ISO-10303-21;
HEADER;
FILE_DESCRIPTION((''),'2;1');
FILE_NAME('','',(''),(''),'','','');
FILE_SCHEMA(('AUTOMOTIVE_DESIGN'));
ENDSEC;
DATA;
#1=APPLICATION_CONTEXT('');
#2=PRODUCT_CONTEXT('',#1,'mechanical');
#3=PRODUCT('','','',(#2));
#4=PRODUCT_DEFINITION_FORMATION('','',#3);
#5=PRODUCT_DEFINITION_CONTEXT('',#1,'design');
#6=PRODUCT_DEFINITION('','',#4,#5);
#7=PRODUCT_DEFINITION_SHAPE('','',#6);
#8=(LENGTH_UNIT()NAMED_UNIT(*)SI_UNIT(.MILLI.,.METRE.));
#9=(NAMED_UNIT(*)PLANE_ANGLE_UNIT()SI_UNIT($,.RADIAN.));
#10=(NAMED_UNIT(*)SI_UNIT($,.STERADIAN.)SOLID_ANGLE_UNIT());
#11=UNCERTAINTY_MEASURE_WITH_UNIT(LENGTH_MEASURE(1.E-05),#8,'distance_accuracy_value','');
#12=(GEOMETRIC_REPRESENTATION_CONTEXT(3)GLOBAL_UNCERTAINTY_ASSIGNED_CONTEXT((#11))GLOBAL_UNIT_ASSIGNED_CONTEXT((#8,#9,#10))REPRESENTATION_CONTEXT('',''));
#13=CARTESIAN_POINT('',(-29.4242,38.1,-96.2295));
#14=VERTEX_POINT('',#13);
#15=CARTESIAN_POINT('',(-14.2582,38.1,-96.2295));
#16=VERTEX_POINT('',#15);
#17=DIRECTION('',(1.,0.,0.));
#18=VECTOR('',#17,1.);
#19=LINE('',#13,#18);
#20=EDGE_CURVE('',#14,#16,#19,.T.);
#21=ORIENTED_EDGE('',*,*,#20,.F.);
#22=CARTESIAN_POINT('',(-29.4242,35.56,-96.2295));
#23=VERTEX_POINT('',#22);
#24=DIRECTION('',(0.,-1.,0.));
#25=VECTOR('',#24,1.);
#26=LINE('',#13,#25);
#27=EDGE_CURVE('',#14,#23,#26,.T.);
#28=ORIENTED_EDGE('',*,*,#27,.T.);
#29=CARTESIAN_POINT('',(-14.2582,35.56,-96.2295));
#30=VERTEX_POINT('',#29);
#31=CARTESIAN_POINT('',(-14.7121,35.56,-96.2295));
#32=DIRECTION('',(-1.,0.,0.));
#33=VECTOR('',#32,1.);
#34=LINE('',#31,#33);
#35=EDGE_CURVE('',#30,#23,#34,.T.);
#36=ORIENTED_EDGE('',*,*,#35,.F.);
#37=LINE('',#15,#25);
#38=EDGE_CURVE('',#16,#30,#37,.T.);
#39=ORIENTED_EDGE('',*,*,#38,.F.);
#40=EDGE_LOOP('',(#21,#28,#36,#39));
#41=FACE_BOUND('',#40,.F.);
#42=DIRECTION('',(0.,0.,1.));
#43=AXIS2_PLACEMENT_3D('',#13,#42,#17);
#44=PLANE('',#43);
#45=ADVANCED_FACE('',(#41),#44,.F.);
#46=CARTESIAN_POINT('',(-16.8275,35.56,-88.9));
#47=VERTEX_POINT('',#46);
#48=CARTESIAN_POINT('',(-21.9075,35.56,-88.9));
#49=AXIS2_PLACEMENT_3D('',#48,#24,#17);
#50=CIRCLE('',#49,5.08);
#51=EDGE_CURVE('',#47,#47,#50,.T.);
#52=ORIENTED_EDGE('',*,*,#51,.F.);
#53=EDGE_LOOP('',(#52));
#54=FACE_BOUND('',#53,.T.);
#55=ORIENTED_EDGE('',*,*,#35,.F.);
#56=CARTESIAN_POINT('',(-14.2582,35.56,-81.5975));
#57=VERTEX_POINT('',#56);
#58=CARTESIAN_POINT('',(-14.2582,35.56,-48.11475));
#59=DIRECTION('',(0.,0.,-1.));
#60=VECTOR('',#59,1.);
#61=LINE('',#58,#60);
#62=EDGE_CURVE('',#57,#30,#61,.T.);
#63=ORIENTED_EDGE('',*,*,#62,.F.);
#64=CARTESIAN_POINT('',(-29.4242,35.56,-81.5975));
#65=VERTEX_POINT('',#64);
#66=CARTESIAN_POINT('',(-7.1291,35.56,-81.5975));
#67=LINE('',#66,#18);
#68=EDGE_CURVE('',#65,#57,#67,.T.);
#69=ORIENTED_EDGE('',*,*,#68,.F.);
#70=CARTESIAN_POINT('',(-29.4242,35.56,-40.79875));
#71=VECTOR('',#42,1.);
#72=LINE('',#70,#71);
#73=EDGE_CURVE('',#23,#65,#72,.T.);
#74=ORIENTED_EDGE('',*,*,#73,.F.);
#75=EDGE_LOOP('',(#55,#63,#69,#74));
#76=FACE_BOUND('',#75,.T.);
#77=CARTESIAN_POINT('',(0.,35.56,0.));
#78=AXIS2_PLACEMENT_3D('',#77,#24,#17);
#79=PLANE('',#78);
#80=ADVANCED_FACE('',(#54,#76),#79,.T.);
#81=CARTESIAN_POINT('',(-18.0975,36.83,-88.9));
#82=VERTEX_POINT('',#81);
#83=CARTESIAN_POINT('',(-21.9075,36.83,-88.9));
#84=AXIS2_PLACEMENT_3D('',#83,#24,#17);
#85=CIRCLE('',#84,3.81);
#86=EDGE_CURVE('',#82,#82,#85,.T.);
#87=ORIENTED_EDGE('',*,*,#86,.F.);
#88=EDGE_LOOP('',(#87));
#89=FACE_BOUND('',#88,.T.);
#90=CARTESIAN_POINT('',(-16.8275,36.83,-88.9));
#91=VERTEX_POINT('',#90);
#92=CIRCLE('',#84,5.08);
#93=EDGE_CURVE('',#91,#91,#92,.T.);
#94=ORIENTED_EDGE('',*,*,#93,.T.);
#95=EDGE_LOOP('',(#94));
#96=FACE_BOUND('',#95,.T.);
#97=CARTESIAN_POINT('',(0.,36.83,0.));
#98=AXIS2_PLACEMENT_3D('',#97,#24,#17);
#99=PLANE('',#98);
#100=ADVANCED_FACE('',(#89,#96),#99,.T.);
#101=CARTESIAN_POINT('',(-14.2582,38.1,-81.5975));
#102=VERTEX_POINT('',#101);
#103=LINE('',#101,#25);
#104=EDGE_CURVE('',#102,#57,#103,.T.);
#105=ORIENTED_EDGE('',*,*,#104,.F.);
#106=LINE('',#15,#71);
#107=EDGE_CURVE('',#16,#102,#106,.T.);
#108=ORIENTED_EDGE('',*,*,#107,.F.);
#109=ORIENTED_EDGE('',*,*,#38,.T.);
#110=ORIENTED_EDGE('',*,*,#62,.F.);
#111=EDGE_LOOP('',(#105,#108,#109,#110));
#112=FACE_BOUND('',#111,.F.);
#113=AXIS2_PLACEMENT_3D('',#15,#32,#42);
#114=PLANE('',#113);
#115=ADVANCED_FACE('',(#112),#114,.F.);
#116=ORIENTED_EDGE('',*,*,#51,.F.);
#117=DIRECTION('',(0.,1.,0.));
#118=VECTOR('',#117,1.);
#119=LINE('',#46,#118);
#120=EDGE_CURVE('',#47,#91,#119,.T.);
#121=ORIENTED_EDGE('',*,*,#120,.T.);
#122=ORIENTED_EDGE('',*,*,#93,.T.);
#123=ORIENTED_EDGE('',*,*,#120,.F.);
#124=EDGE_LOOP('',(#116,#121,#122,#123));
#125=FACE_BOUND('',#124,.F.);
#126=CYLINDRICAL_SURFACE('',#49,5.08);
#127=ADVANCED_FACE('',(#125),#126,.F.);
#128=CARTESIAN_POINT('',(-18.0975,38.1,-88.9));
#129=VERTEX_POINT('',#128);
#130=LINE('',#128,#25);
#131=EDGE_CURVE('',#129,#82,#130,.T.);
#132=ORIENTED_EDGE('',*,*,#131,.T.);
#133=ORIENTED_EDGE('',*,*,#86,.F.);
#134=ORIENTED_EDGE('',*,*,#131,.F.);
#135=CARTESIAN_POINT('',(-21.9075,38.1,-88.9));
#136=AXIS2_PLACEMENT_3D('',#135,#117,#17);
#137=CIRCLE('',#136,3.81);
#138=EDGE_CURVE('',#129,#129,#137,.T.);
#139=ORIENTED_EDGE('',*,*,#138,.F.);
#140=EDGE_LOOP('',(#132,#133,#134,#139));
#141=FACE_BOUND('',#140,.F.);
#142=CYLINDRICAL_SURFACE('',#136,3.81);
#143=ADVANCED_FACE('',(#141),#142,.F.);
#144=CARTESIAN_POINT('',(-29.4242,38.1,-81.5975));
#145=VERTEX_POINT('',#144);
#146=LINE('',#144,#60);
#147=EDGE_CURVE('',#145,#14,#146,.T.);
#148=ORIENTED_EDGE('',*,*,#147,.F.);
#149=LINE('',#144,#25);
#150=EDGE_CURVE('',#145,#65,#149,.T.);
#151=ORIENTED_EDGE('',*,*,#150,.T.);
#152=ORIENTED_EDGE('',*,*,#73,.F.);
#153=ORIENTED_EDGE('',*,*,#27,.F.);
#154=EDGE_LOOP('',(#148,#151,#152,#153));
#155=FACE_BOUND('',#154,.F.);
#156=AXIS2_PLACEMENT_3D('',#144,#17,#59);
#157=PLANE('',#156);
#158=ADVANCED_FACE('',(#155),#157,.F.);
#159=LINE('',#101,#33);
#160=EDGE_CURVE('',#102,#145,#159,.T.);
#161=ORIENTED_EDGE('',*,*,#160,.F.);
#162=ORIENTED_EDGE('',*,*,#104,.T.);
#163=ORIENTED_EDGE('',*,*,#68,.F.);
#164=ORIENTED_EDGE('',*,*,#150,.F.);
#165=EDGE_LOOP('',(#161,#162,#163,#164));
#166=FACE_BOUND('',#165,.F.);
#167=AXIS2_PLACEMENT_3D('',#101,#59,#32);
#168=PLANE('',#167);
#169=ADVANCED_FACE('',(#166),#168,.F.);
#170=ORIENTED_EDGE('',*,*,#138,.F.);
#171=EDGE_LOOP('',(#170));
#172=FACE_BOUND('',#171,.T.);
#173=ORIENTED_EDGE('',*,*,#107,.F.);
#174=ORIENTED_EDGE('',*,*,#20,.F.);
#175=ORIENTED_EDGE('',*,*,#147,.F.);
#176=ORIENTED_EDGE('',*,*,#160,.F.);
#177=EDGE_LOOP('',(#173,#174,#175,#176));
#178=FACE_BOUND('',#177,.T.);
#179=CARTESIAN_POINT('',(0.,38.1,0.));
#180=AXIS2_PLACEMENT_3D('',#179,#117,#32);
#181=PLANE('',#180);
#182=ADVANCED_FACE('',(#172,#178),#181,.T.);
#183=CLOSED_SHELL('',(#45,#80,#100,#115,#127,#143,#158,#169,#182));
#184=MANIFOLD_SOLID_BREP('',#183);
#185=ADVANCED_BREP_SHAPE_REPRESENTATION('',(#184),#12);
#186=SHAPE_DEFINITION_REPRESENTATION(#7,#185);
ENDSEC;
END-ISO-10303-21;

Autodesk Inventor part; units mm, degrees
ref_plane "YZ Plane" through (0, 0, 0) normal (1, 0, 0) x (0, 1, 0)
ref_plane "XZ Plane" through (0, 0, 0) normal (0, 1, 0) x (-1, 0, 0)
ref_plane "XY Plane" through (0, 0, 0) normal (0, 0, 1) x (1, 0, 0)
sketch "Sketch1" plane through (0, 0, 0) normal (0, 1, 0) x (-1, 0, 0)
  line L0 (0, 0) -> (177.8, 0)
  line L1 (177.8, 0) -> (177.8, -114.3)
  line L2 (177.8, -114.3) -> (0, -114.3)
  line L3 (0, -114.3) -> (0, 0)
  dimension "d0" = 177.8
  dimension "d1" = 114.3
extrude "Extrusion1" add sketch "Sketch1" along normal blind 38.1
sketch "Sketch2" plane through (0, 0, 0) normal (0, -1, 0) x (1, 0, 0)
  line L0 (-177.8, -114.3) -> (-177.8, 0) projected
  line L1 (0, 0) -> (-177.8, 0)
  line L2 (-177.8, 0) -> (-177.8, -114.3)
  line L3 (-177.8, -114.3) -> (0, -114.3)
  line L4 (0, -114.3) -> (0, 0)
  line L5 (-5.08, -5.08) -> (-172.72, -5.08)
  line L6 (-172.72, -5.08) -> (-172.72, -109.22)
  line L7 (-172.72, -109.22) -> (-5.08, -109.22)
  line L8 (-5.08, -109.22) -> (-5.08, -5.08)
  dimension "d4" = 5.08
extrude "Extrusion2" cut sketch "Sketch2" against normal blind 35.56 contours L8 L7 L6 L5
fillet "Fillet1" radius 3.175 4 edges at (-177.8, 38.1, -57.15) (-88.9, 38.1, 0) (-88.9, 38.1, -114.3) (0, 38.1, -57.15)
sketch "Sketch3" plane through (0, 38.1, 0) normal (0, 1, 0) x (1, 0, 0)
  line L0 (-177.8, 114.3) -> (-171.45, 114.3)
  line L1 (-171.45, 114.3) -> (-171.45, 0)
  line L2 (-171.45, 0) -> (-177.8, 0)
  line L3 (-177.8, 0) -> (-177.8, 114.3)
  line L4 (0, 114.3) -> (-177.8, 114.3) projected
  line L5 (-177.8, 114.3) -> (0, 114.3)
  line L6 (0, 114.3) -> (0, 107.95)
  line L7 (0, 107.95) -> (-177.8, 107.95)
  line L8 (-177.8, 107.95) -> (-177.8, 114.3)
  line L9 (-158.75, 100.4887) -> (-100.6475, 100.4887)
  line L10 (-100.6475, 100.4887) -> (-100.6475, 13.8112)
  line L11 (-100.6475, 13.8112) -> (-158.75, 13.8112)
  line L12 (-158.75, 13.8112) -> (-158.75, 100.4887)
  point P0 (0, 0)
  dimension "d8" = 6.35
  dimension "d9" = 6.35
  dimension "d10" = 58.1025
  dimension "d11" = 86.6775
  dimension "d12" = 13.8112
  dimension "d13" = 19.05
extrude "Extrusion3" cut sketch "Sketch3" against normal blind 35.56 contours L9 L10 L11 L12
sketch "Sketch4" plane through (0, 38.1, 0) normal (0, 1, 0) x (1, 0, 0)
  line L0 (-94.2975, 17.78) -> (-81.2088, 17.78)
  line L1 (-91.7575, 20.32) -> (-91.7575, 26.67)
  line L2 (-91.7575, 26.67) -> (-94.2975, 26.67)
  line L3 (-94.2975, 26.67) -> (-94.2975, 17.78)
  line L4 (-94.2975, 17.78) -> (-78.6765, 17.78)
  line L5 (-78.6765, 17.78) -> (-78.6765, 20.32)
  line L6 (-94.2975, 24.2647) -> (-94.2975, 17.78)
  line L7 (-85.6615, 20.32) -> (-85.6615, 24.13)
  line L8 (-85.6615, 24.13) -> (-88.2015, 24.13)
  line L9 (-88.2015, 24.13) -> (-88.2015, 20.32)
  line L10 (-78.6765, 20.32) -> (-85.6615, 20.32)
  line L11 (-88.2015, 20.32) -> (-91.7575, 20.32)
  line L12 (-100.6475, 100.4887) -> (-100.6475, 13.8112) projected
  line L13 (-177.8, 0) -> (0, 0) projected
  line L14 (-94.2975, 27.94) -> (-78.6765, 27.94)
  line L15 (-78.6765, 27.94) -> (-78.6765, 30.7699)
  line L16 (-81.2165, 30.48) -> (-94.2975, 30.48)
  line L17 (-94.2975, 30.48) -> (-94.2975, 27.94)
  line L18 (-83.0828, 27.94) -> (-78.6765, 27.94)
  line L19 (-78.6765, 27.94) -> (-78.6765, 36.83)
  line L20 (-78.6765, 36.83) -> (-81.2165, 36.83)
  line L21 (-81.2165, 36.83) -> (-81.2165, 30.48)
  ellipse E0 centre (-86.487, 41.91) end of major axis (-94.2975, 41.91) minor radius 5.334
  ellipse E1 centre (-86.487, 53.34) end of major axis (-94.2975, 53.34) minor radius 5.334
  line L22 (-94.2975, 60.96) -> (-78.6765, 60.96)
  line L23 (-78.6765, 60.96) -> (-78.6765, 63.754)
  line L24 (-94.2975, 63.754) -> (-94.2975, 60.96)
  ellipse E2 centre (-86.487, 63.754) end of major axis (-94.2975, 63.754) minor radius 7.62 (-78.6765, 63.754) -> (-94.2975, 63.754) ccw
  line L25 (-91.7575, 63.754) -> (-91.7575, 63.5)
  line L26 (-91.7575, 63.5) -> (-81.2165, 63.5)
  line L27 (-81.2165, 63.5) -> (-81.2165, 63.754)
  line L28 (-94.2975, 82.55) -> (-78.6765, 82.55)
  line L29 (-78.6765, 82.55) -> (-78.6765, 80.01)
  line L30 (-78.6765, 80.01) -> (-94.2975, 80.01)
  line L31 (-94.2975, 80.01) -> (-94.2975, 82.55)
  line L32 (-91.7575, 89.535) -> (-78.6765, 89.535)
  line L33 (-78.6765, 89.535) -> (-78.6765, 92.075)
  line L34 (-78.6765, 92.075) -> (-91.7575, 92.075)
  line L35 (-94.2975, 94.8241) -> (-94.2975, 91.9305)
  line L36 (-94.2975, 85.09) -> (-91.7575, 85.09)
  line L37 (-91.7575, 96.52) -> (-94.2975, 96.52)
  line L38 (-94.2975, 96.52) -> (-94.2975, 85.09)
  line L39 (-91.7575, 85.09) -> (-91.7575, 89.535)
  line L40 (-91.7575, 92.075) -> (-91.7575, 96.52)
  spline S0 degree 5 poles (-91.7575, 41.91) (-91.7584, 41.6813) (-91.6944, 41.4527) (-91.5885, 41.2473) (-91.2042, 40.6846) (-90.6636, 40.2564) (-90.282, 40.0177) (-89.3306, 39.5478) (-88.3046, 39.2718) (-87.7026, 39.1679) (-86.487, 39.0641) (-85.2714, 39.1679) (-84.6694, 39.2718) (-83.6435, 39.5478) (-82.692, 40.0176) (-82.3107, 40.2563) (-81.7696, 40.6845) (-81.3858, 41.2473) (-81.2787, 41.4526) (-81.1539, 41.91) (-81.2787, 42.3674) (-81.3858, 42.5727) (-81.7696, 43.1355) (-82.3107, 43.5637) (-82.692, 43.8024) (-83.6435, 44.2722) (-84.6694, 44.5482) (-85.2714, 44.6521) (-86.487, 44.7559) (-87.7026, 44.6521) (-88.3046, 44.5482) (-89.3306, 44.2722) (-90.282, 43.8023) (-90.6636, 43.5636) (-91.2042, 43.1354) (-91.5885, 42.5727) (-91.6944, 42.3673) (-91.7584, 42.1387) (-91.7575, 41.91) knots 0 0 0 0 0 0 0.044471 0.044471 0.044471 0.131758 0.131758 0.131758 0.25 0.25 0.25 0.36824 0.36824 0.36824 0.455522 0.455522 0.455522 0.5 0.5 0.5 0.544478 0.544478 0.544478 0.63176 0.63176 0.63176 0.75 0.75 0.75 0.868242 0.868242 0.868242 0.955529 0.955529 0.955529 1 1 1 1 1 1
  spline S1 degree 5 poles (-91.7575, 53.34) (-91.7584, 53.1113) (-91.6944, 52.8827) (-91.5885, 52.6773) (-91.2042, 52.1146) (-90.6636, 51.6864) (-90.282, 51.4477) (-89.3306, 50.9778) (-88.3046, 50.7018) (-87.7026, 50.5979) (-86.487, 50.4941) (-85.2714, 50.5979) (-84.6694, 50.7018) (-83.6435, 50.9778) (-82.692, 51.4476) (-82.3107, 51.6863) (-81.7696, 52.1145) (-81.3858, 52.6773) (-81.2787, 52.8826) (-81.1539, 53.34) (-81.2787, 53.7974) (-81.3858, 54.0027) (-81.7696, 54.5655) (-82.3107, 54.9937) (-82.692, 55.2324) (-83.6435, 55.7022) (-84.6694, 55.9782) (-85.2714, 56.0821) (-86.487, 56.1859) (-87.7026, 56.0821) (-88.3046, 55.9782) (-89.3306, 55.7022) (-90.282, 55.2323) (-90.6636, 54.9936) (-91.2042, 54.5654) (-91.5885, 54.0027) (-91.6944, 53.7973) (-91.7584, 53.5687) (-91.7575, 53.34) knots 0 0 0 0 0 0 0.044471 0.044471 0.044471 0.131758 0.131758 0.131758 0.25 0.25 0.25 0.36824 0.36824 0.36824 0.455522 0.455522 0.455522 0.5 0.5 0.5 0.544478 0.544478 0.544478 0.63176 0.63176 0.63176 0.75 0.75 0.75 0.868242 0.868242 0.868242 0.955529 0.955529 0.955529 1 1 1 1 1 1
  spline S2 degree 5 poles (-81.2165, 63.754) (-81.2166, 64.309) (-81.2953, 64.8639) (-81.4525, 65.404) (-82.1282, 66.8995) (-83.3585, 68.0474) (-84.3453, 68.5716) (-86.487, 69.0964) (-88.6287, 68.5716) (-89.6155, 68.0474) (-90.8458, 66.8995) (-91.5215, 65.404) (-91.6787, 64.8639) (-91.7574, 64.309) (-91.7575, 63.754) knots 0 0 0 0 0 0 0.170659 0.170659 0.170659 0.5 0.5 0.5 0.829341 0.829341 0.829341 1 1 1 1 1 1
  point P0 (-94.2975, 93.3773)
  point P1 (-88.9, 0)
  point P2 (-93.0275, 85.09)
  dimension "d32" = 5.334
  dimension "d33" = 7.8105
  dimension "d36" = 7.8105
  dimension "d37" = 5.334
  dimension "d42" = 7.62
  dimension "d43" = 2.54
  dimension "d16" = 2.54
  dimension "d17" = 3.556
  dimension "d18" = 2.54
  dimension "d19" = 6.985
  dimension "d20" = 8.89
  dimension "d21" = 6.35
  dimension "d22" = 3.81
  dimension "d23" = 3.81
  dimension "d24" = 6.35
  dimension "d25" = 17.78
  dimension "d26" = 2.54
  dimension "d27" = 2.54
  dimension "d28" = 6.35
  dimension "d29" = 15.621
  dimension "d30" = 6.35
  dimension "d31" = 27.94
  dimension "d34" = 14.1605
  dimension "d35" = 41.91
  dimension "d38" = 14.1605
  dimension "d39" = 53.34
  dimension "d40" = 2.54
  dimension "d41" = 2.54
  dimension "d44" = 6.35
  dimension "d45" = 15.621
  dimension "d46" = 60.96
  dimension "d47" = 2.794
  dimension "d48" = 63.754
  dimension "d49" = 14.1605
  dimension "d50" = 2.54
  dimension "d51" = 15.621
  dimension "d52" = 4.445
  dimension "d53" = 4.445
  dimension "d54" = 2.54
  dimension "d55" = 2.54
  dimension "d56" = 6.35
  dimension "d57" = 80.01
  dimension "d58" = 2.54
  dimension "d59" = 13.081
  dimension "d62" = 3.9688
  dimension "d63" = 3.9688
extrude "Extrusion4" cut sketch "Sketch4" against normal blind 1.27
sketch "Sketch5" plane through (0, 38.1, 0) normal (0, 1, 0) x (1, 0, 0)
  line L0 (-43.4975, 22.6219) -> (-37.9413, 22.6219)
  line L1 (-37.9413, 22.6219) -> (-37.9413, 28.1781)
  line L2 (-37.9413, 28.1781) -> (-43.4975, 28.1781)
  line L3 (-43.4975, 28.1781) -> (-43.4975, 22.6219)
  line L4 (-43.4975, 38.4969) -> (-37.9413, 38.4969)
  line L5 (-37.9413, 38.4969) -> (-37.9413, 44.0531)
  line L6 (-37.9413, 44.0531) -> (-43.4975, 44.0531)
  line L7 (-43.4975, 44.0531) -> (-43.4975, 38.4969)
  line L8 (-43.4975, 54.3719) -> (-37.9413, 54.3719)
  line L9 (-37.9413, 54.3719) -> (-37.9413, 59.9281)
  line L10 (-37.9413, 59.9281) -> (-43.4975, 59.9281)
  line L11 (-43.4975, 59.9281) -> (-43.4975, 54.3719)
  line L12 (-43.4975, 70.2469) -> (-37.9413, 70.2469)
  line L13 (-37.9413, 70.2469) -> (-37.9413, 75.8031)
  line L14 (-37.9413, 75.8031) -> (-43.4975, 75.8031)
  line L15 (-43.4975, 75.8031) -> (-43.4975, 70.2469)
  line L16 (-43.4975, 86.1219) -> (-37.9413, 86.1219)
  line L17 (-37.9413, 86.1219) -> (-37.9413, 91.6781)
  line L18 (-37.9413, 91.6781) -> (-43.4975, 91.6781)
  line L19 (-43.4975, 91.6781) -> (-43.4975, 86.1219)
  line L20 (0, 114.3) -> (-177.8, 114.3) projected
  line L21 (-177.8, 0) -> (0, 0) projected
  line L22 (-100.6475, 100.4887) -> (-100.6475, 13.8112) projected
  circle A0 centre (-21.9075, 25.4) radius 3.81
  circle A1 centre (-21.9075, 41.275) radius 3.81
  circle A2 centre (-21.9075, 57.15) radius 3.81
  circle A3 centre (-21.9075, 73.025) radius 3.81
  circle A4 centre (-21.9075, 88.9) radius 3.81
  point P0 (-43.4975, 73.025)
  dimension "d64" = 5.5563
  dimension "d65" = 5.5563
  dimension "d66" = 5.5563
  dimension "d67" = 5.5563
  dimension "d68" = 5.5563
  dimension "d69" = 5.5563
  dimension "d70" = 15.875
  dimension "d71" = 15.875
  dimension "d72" = 15.875
  dimension "d73" = 15.875
  dimension "d74" = 22.6219
  dimension "d76" = 57.15
  dimension "d77" = 7.62
  dimension "d78" = 7.62
  dimension "d79" = 7.62
  dimension "d80" = 7.62
  dimension "d81" = 7.62
  dimension "d82" = 15.875
  dimension "d83" = 15.875
  dimension "d84" = 15.875
  dimension "d85" = 15.875
  dimension "d86" = 25.4
  dimension "d87" = 78.74
  dimension "d88" = 78.74
  dimension "d89" = 78.74
  dimension "d90" = 78.74
  dimension "d91" = 78.74
extrude "Extrusion5" cut sketch "Sketch5" against normal blind 25.4
sketch "Sketch6" plane through (0, 35.56, 0) normal (0, -1, 0) x (1, 0, 0)
  circle A0 centre (-21.9075, -88.9) radius 3.81 projected
  circle A1 centre (-21.9075, -88.9) radius 5.08
  circle A2 centre (-21.9075, -73.025) radius 3.81 projected
  circle A3 centre (-21.9075, -73.025) radius 5.08
  circle A4 centre (-21.9075, -57.15) radius 3.81 projected
  circle A5 centre (-21.9075, -57.15) radius 5.08
  circle A6 centre (-21.9075, -41.275) radius 3.81 projected
  circle A7 centre (-21.9075, -41.275) radius 5.08
  circle A8 centre (-21.9075, -25.4) radius 3.81 projected
  circle A9 centre (-21.9075, -25.4) radius 5.08
  line L0 (-43.4975, -59.9281) -> (-37.9413, -59.9281)
  line L1 (-37.9413, -59.9281) -> (-37.9413, -54.3719)
  line L2 (-37.9413, -54.3719) -> (-43.4975, -54.3719)
  line L3 (-43.4975, -54.3719) -> (-43.4975, -59.9281)
  line L4 (-45.4025, -61.8331) -> (-36.0363, -61.8331)
  line L5 (-36.0363, -61.8331) -> (-36.0363, -52.4669)
  line L6 (-36.0363, -52.4669) -> (-45.4025, -52.4669)
  line L7 (-45.4025, -52.4669) -> (-45.4025, -61.8331)
  line L8 (-43.4975, -91.6781) -> (-37.9413, -91.6781)
  line L9 (-37.9413, -91.6781) -> (-37.9413, -86.1219)
  line L10 (-37.9413, -86.1219) -> (-43.4975, -86.1219)
  line L11 (-43.4975, -86.1219) -> (-43.4975, -91.6781)
  line L12 (-43.4975, -75.8031) -> (-37.9413, -75.8031) projected
  line L13 (-37.9413, -70.2469) -> (-36.6713, -68.9769) projected
  line L14 (-43.4975, -75.8031) -> (-37.9413, -75.8031)
  line L15 (-37.9413, -75.8031) -> (-37.9413, -70.2469)
  line L16 (-37.9413, -70.2469) -> (-43.4975, -70.2469)
  line L17 (-43.4975, -70.2469) -> (-43.4975, -75.8031)
  line L18 (-43.4975, -38.4969) -> (-43.4975, -44.0531) projected
  line L19 (-43.4975, -44.0531) -> (-37.9413, -44.0531)
  line L20 (-37.9413, -44.0531) -> (-37.9413, -38.4969)
  line L21 (-37.9413, -38.4969) -> (-43.4975, -38.4969)
  line L22 (-43.4975, -38.4969) -> (-43.4975, -44.0531)
  line L23 (-37.9413, -28.1781) -> (-43.4975, -28.1781) projected
  line L24 (-37.9413, -22.6219) -> (-36.6713, -21.3519) projected
  line L25 (-43.4975, -28.1781) -> (-37.9413, -28.1781)
  line L26 (-37.9413, -28.1781) -> (-37.9413, -22.6219)
  line L27 (-37.9413, -22.6219) -> (-43.4975, -22.6219)
  line L28 (-43.4975, -22.6219) -> (-43.4975, -28.1781)
  line L29 (-45.4025, -77.7081) -> (-36.0363, -77.7081)
  line L30 (-36.0363, -77.7081) -> (-36.0363, -68.3419)
  line L31 (-36.0363, -68.3419) -> (-45.4025, -68.3419)
  line L32 (-45.4025, -68.3419) -> (-45.4025, -77.7081)
  line L33 (-45.4025, -84.2169) -> (-36.0362, -84.2169)
  line L34 (-36.0362, -84.2169) -> (-36.0362, -93.5831)
  line L35 (-36.0362, -93.5831) -> (-45.4025, -93.5831)
  line L36 (-45.4025, -93.5831) -> (-45.4025, -84.2169)
  line L37 (-36.0362, -45.9581) -> (-45.4025, -45.9581)
  line L38 (-45.4025, -45.9581) -> (-45.4025, -36.5919)
  line L39 (-45.4025, -36.5919) -> (-36.0362, -36.5919)
  line L40 (-36.0362, -36.5919) -> (-36.0362, -45.9581)
  line L41 (-45.4025, -30.0831) -> (-36.0363, -30.0831)
  line L42 (-36.0363, -30.0831) -> (-36.0363, -20.7169)
  line L43 (-36.0363, -20.7169) -> (-45.4025, -20.7169)
  line L44 (-45.4025, -20.7169) -> (-45.4025, -30.0831)
  line L45 (-48.3394, -99.6918) -> (-33.0994, -99.6918)
  line L46 (-33.0994, -99.6918) -> (-33.0994, -14.6018)
  line L47 (-33.0994, -14.6018) -> (-48.3394, -14.6018)
  line L48 (-48.3394, -14.6018) -> (-48.3394, -99.6918)
  point P0 (0, 0)
  point P1 (-43.4975, -38.4969)
  point P2 (-40.7194, -44.0531)
  point P3 (-40.7194, -91.6781)
  point P4 (-40.7194, -14.6018)
  dimension "d97" = 10.16
  dimension "d98" = 10.16
  dimension "d99" = 10.16
  dimension "d100" = 10.16
  dimension "d101" = 10.16
  dimension "d119" = 1.905
  dimension "d120" = 1.905
  dimension "d121" = 1.905
  dimension "d122" = 1.905
  dimension "d123" = 1.905
  dimension "d136" = 15.24
  dimension "d137" = 85.09
  dimension "d139" = 7.62
  dimension "d140" = 8.0137
  dimension "d141" = 8.02
extrude "Extrusion6" cut sketch "Sketch6" against normal blind 1.27 contours A1 | A3 | A5 | A7 | A9
extrude "Extrusion9" cut sketch "Sketch6" against normal blind 1.7463 contours L7 L6 L5 L4 | L32 L31 L30 L29 | L33 L34 L35 L36 | L37 L38 L39 L40 | L44 L43 L42 L41
sketch "Sketch8" plane through (0, 35.56, 0) normal (0, -1, 0) x (1, 0, 0)
  line L0 (-100.6475, -13.8112) -> (-100.6475, -100.4887) projected
  line L1 (-100.6475, -13.8112) -> (-158.75, -13.8112)
  line L2 (-158.75, -13.8112) -> (-158.75, -7.4613)
  line L3 (-158.75, -7.4613) -> (-100.6475, -7.4612)
  line L4 (-100.6475, -7.4612) -> (-100.6475, -13.8112)
  line L5 (-158.75, -100.4887) -> (-100.6475, -100.4887) projected
  line L6 (-100.6475, -100.4887) -> (-158.75, -100.4887)
  line L7 (-158.75, -100.4887) -> (-158.75, -107.4737)
  line L8 (-158.75, -107.4737) -> (-100.6475, -107.4737)
  line L9 (-100.6475, -107.4737) -> (-100.6475, -100.4887)
  line L10 (-100.6475, -7.4612) -> (-94.2975, -7.4612)
  line L11 (-94.2975, -7.4612) -> (-94.2975, -13.8112)
  line L12 (-94.2975, -13.8112) -> (-100.6475, -13.8112)
  line L13 (-100.6475, -13.8112) -> (-100.6475, -7.4612)
  line L14 (-100.6475, -100.4887) -> (-94.2975, -100.4887)
  line L15 (-94.2975, -100.4887) -> (-94.2975, -107.4737)
  line L16 (-94.2975, -107.4737) -> (-100.6475, -107.4737)
  line L17 (-100.6475, -107.4737) -> (-100.6475, -100.4887)
  line L18 (-158.75, -100.4887) -> (-165.1, -100.4887)
  line L19 (-165.1, -100.4887) -> (-165.1, -107.4737)
  line L20 (-165.1, -107.4737) -> (-158.75, -107.4737)
  line L21 (-158.75, -107.4737) -> (-158.75, -100.4887)
  line L22 (-158.75, -7.4613) -> (-165.1, -7.4613)
  line L23 (-165.1, -7.4613) -> (-165.1, -13.8112)
  line L24 (-165.1, -13.8112) -> (-158.75, -13.8112)
  line L25 (-158.75, -13.8112) -> (-158.75, -7.4613)
  line L26 (-102.4053, -9.0487) -> (-155.7453, -9.0487)
  line L27 (-155.7453, -9.0487) -> (-155.7453, -12.2237)
  line L28 (-155.7453, -12.2237) -> (-102.4053, -12.2237)
  line L29 (-102.4053, -12.2237) -> (-102.4053, -9.0487)
  point P0 (0, 0)
  dimension "d126" = 6.35
  dimension "d127" = 6.985
  dimension "d128" = 6.35
  dimension "d129" = 6.35
  dimension "d130" = 6.35
  dimension "d131" = 53.34
  dimension "d132" = 3.175
  dimension "d133" = 1.5875
extrude "Extrusion10" cut sketch "Sketch8" against normal blind 1.27 contours L29 L28 L27 L26
extrude "Extrusion11" cut sketch "Sketch6" against normal blind 0.9525 contours L48 L47 L46 L45
sketch "Sketch9" plane through (-177.8, 0, 0) normal (0, 0, 1) x (1, 0, 0)
  line L0 (77.1525, 35.56) -> (19.05, 35.56) projected
  line L1 (172.72, 0) -> (5.08, 0) projected
  line L2 (77.1525, 35.56) -> (127.9525, 35.56)
  line L3 (127.9525, 35.56) -> (127.9525, 0)
  line L4 (127.9525, 0) -> (77.1525, 0)
  line L5 (77.1525, 0) -> (77.1525, 35.56)
  line L6 (86.0425, 17.145) -> (106.68, 17.145)
  line L7 (106.68, 17.145) -> (106.68, 15.0495)
  line L8 (106.68, 15.0495) -> (86.0425, 15.0495)
  line L9 (86.0425, 15.0495) -> (86.0425, 17.145)
  line L10 (88.5825, 15.0495) -> (97.4725, 15.0495)
  line L11 (97.4725, 15.0495) -> (97.4725, 11.2395)
  line L12 (97.4725, 11.2395) -> (88.5825, 11.2395)
  line L13 (88.5825, 11.2395) -> (88.5825, 15.0495)
  line L14 (0, 34.925) -> (177.8, 34.925) projected
  line L15 (0, 0) -> (0, 34.925) projected
  line L16 (177.8, 0) -> (177.8, 34.925) projected
  point P0 (97.4725, 15.0495)
  dimension "d144" = 50.8
  dimension "d145" = 20.6375
  dimension "d146" = 2.0955
  dimension "d147" = 8.89
  dimension "d148" = 3.81
  dimension "d149" = 2.54
  dimension "d150" = 17.78
  dimension "d187" = 71.12
extrude "Extrusion12" cut sketch "Sketch9" against normal blind 5.08 contours L6 L7 L8 L9 | L8 L11 L12 L13
sketch "Sketch10" plane through (-5.08, 0, -5.08) normal (0, 0, -1) x (-1, 0, 0)
  line L0 (84.1375, 11.2395) -> (75.2475, 11.2395) projected
  line L1 (84.1375, 15.0495) -> (86.6775, 15.0495) projected
  line L2 (75.2475, 11.2395) -> (84.1375, 11.2395)
  line L3 (84.1375, 11.2395) -> (84.1375, 15.0495)
  line L4 (75.2475, 15.0495) -> (75.2475, 11.2395)
  line L5 (75.2475, 15.0495) -> (66.04, 15.0495) projected
  line L6 (86.6775, 17.145) -> (86.6775, 15.0495) projected
  line L7 (86.6775, 15.0495) -> (86.6775, 17.145)
  line L8 (86.6775, 17.145) -> (66.04, 17.145)
  line L9 (66.04, 17.145) -> (66.04, 15.0495)
  line L10 (66.04, 15.0495) -> (75.2475, 15.0495)
  line L11 (84.1375, 15.0495) -> (86.6775, 15.0495)
  line L12 (73.3425, 9.3345) -> (86.0425, 9.3345)
  line L13 (86.0425, 9.3345) -> (86.0425, 13.1445)
  line L14 (86.0425, 13.1445) -> (88.5825, 13.1445)
  line L15 (88.5825, 13.1445) -> (88.5825, 19.05)
  line L16 (88.5825, 19.05) -> (64.135, 19.05)
  line L17 (64.135, 19.05) -> (64.135, 13.1445)
  line L18 (64.135, 13.1445) -> (73.3425, 13.1445)
  line L19 (73.3425, 13.1445) -> (73.3425, 9.3345)
  line L20 (73.3425, 13.1445) -> (73.3425, 15.0495)
  line L21 (86.0425, 13.1445) -> (86.0425, 15.0495)
  point P0 (-5.08, 0)
  dimension "d153" = 1.905
extrude "Extrusion13" cut sketch "Sketch10" against normal blind 3.175 contours L3 L1 L21 L13 L12 L19 L20 L5 L4 L0 | L1 L6 L8 L9 L5 L20 L18 L17 L16 L15 L14 L21
sketch "Sketch11" plane through (0, 0, -114.3) normal (0, 0, -1) x (-1, 0, 0)
  line L0 (63.5, 23.495) -> (76.2, 23.495)
  line L1 (76.2, 23.495) -> (76.2, 15.875)
  line L2 (76.2, 15.875) -> (63.5, 15.875)
  line L3 (63.5, 15.875) -> (63.5, 23.495)
  line L4 (0, 0) -> (0, 34.925) projected
  circle A0 centre (69.85, 19.685) radius 3.81
  line L5 (0, 34.925) -> (177.8, 34.925) projected
  dimension "d156" = 7.62
  dimension "d157" = 63.5
  dimension "d158" = 12.7
  dimension "d164" = 11.43
  dimension "d165" = 15.24
extrude "Extrusion14" cut sketch "Sketch11" against normal blind 6.35 contours A0
sketch "Sketch12" plane through (-172.72, 0, -109.22) normal (0, 0, 1) x (1, 0, 0)
  line L0 (96.52, 15.875) -> (109.22, 15.875)
  line L1 (109.22, 15.875) -> (109.22, 23.495)
  line L2 (109.22, 23.495) -> (96.52, 23.495)
  line L3 (96.52, 23.495) -> (96.52, 15.875)
  circle A0 centre (102.87, 19.685) radius 3.81 projected
  line L4 (96.52, 15.875) -> (109.22, 23.495) construction
  line L5 (109.22, 15.875) -> (96.52, 23.495) construction
  point P0 (172.72, 0)
  point P1 (102.87, 15.875)
  point P2 (102.87, 23.495)
  dimension "d161" = 12.7
extrude "Extrusion15" cut sketch "Sketch12" against normal blind 2.0574 contours L3 L2 A0 L0 | A0 L2 L1 L0
sketch "Sketch13" plane through (0, 35.56, 0) normal (0, -1, 0) x (1, 0, 0)
  line L0 (-48.3394, -99.6918) -> (-48.3394, -14.6018) projected
  line L1 (-48.3394, -31.1933) -> (-46.4344, -31.1933)
  line L2 (-46.4344, -31.1933) -> (-46.4344, -36.2733)
  line L3 (-46.4344, -36.2733) -> (-48.3394, -36.2733)
  line L4 (-48.3394, -36.2733) -> (-48.3394, -31.1933)
  line L5 (-33.0994, -14.6018) -> (-33.0994, -99.6918) projected
  line L6 (-33.0994, -36.2733) -> (-35.0044, -36.2733)
  line L7 (-35.0044, -36.2733) -> (-35.0044, -31.1933)
  line L8 (-35.0044, -31.1933) -> (-33.0994, -31.1933)
  line L9 (-33.0994, -31.1933) -> (-33.0994, -36.2733)
  line L10 (-46.4344, -31.1933) -> (-51.5144, -31.1933)
  line L11 (-51.5144, -31.1933) -> (-51.5144, -36.2733)
  line L12 (-51.5144, -36.2733) -> (-46.4344, -36.2733)
  line L13 (-46.4344, -36.2733) -> (-46.4344, -31.1933)
  line L14 (-35.0044, -31.1933) -> (-29.9244, -31.1933)
  line L15 (-29.9244, -31.1933) -> (-29.9244, -36.2733)
  line L16 (-29.9244, -36.2733) -> (-35.0044, -36.2733)
  line L17 (-35.0044, -36.2733) -> (-35.0044, -31.1933)
  line L18 (-48.3394, -78.5039) -> (-46.4344, -78.5039)
  line L19 (-46.4344, -78.5039) -> (-46.4344, -83.5839)
  line L20 (-46.4344, -83.5839) -> (-48.3394, -83.5839)
  line L21 (-48.3394, -83.5839) -> (-48.3394, -78.5039)
  line L22 (-33.0994, -78.5039) -> (-35.0044, -78.5039)
  line L23 (-35.0044, -78.5039) -> (-35.0044, -83.5839)
  line L24 (-35.0044, -83.5839) -> (-33.0994, -83.5839)
  line L25 (-33.0994, -83.5839) -> (-33.0994, -78.5039)
  line L26 (-46.4344, -78.5039) -> (-51.5144, -78.5039)
  line L27 (-51.5144, -78.5039) -> (-51.5144, -83.5839)
  line L28 (-51.5144, -83.5839) -> (-46.4344, -83.5839)
  line L29 (-46.4344, -83.5839) -> (-46.4344, -78.5039)
  line L30 (-35.0044, -78.5039) -> (-29.9244, -78.5039)
  line L31 (-29.9244, -78.5039) -> (-29.9244, -83.5839)
  line L32 (-29.9244, -83.5839) -> (-35.0044, -83.5839)
  line L33 (-35.0044, -83.5839) -> (-35.0044, -78.5039)
  point P0 (0, 0)
  dimension "d166" = 5.08
  dimension "d167" = 5.08
  dimension "d168" = 5.08
  dimension "d169" = 1.905
  dimension "d170" = 1.905
  dimension "d171" = 1.905
  dimension "d172" = 1.905
  dimension "d173" = 5.08
  dimension "d174" = 5.08
  dimension "d175" = 5.08
  dimension "d176" = 5.08
extrude "Extrusion16" add sketch "Sketch13" along normal blind 1.905
fillet "Fillet2" radius 3.175 4 edges at (-29.9244, 33.655, -81.0439) (-51.5144, 33.655, -81.0439) (-29.9244, 33.655, -33.7333) (-51.5144, 33.655, -33.7333)
sketch "Sketch14" plane through (-46.4344, 35.56, -36.2733) normal (0, 0, -1) x (-1, 0, 0)
  line L0 (1.905, 0) -> (0, 0) projected
  line L1 (0, 0) -> (0, -1.905) projected
  line L2 (1.905, 0) -> (0, 0)
  line L3 (0, 0) -> (0, -0.9525)
  line L4 (0, -0.9525) -> (1.905, -0.9525)
  line L5 (1.905, -0.9525) -> (1.905, 0)
  line L6 (-11.43, 0) -> (-13.335, 0) projected
  line L7 (-13.335, 0) -> (-11.43, 0)
  line L8 (-11.43, 0) -> (-11.43, -0.9525)
  line L9 (-11.43, -0.9525) -> (-13.335, -0.9525)
  line L10 (-13.335, -0.9525) -> (-13.335, 0)
  point P0 (-46.4344, -35.56)
  point P1 (-11.43, 0)
  dimension "d180" = 0.9525
  dimension "d181" = 0.9525
extrude "Extrusion17" cut sketch "Sketch14" along normal blind 50.8 and the other way blind 12.7
sketch "Sketch15" plane through (0, 38.1, 0) normal (0, 1, 0) x (1, 0, 0)
  line L0 (-29.4242, 96.2295) -> (-14.2582, 96.2295)
  line L1 (-14.2582, 96.2295) -> (-14.2582, 81.5975)
  line L2 (-14.2582, 81.5975) -> (-29.4242, 81.5975)
  line L3 (-29.4242, 81.5975) -> (-29.4242, 96.2295)
  line L4 (-199.3478, 132.7561) -> (16.3943, 132.7561)
  line L5 (16.3943, 132.7561) -> (16.3943, -7.6898)
  line L6 (16.3943, -7.6898) -> (-199.3478, -7.6898)
  line L7 (-199.3478, -7.6898) -> (-199.3478, 132.7561)
  point P0 (0, 0)
extrude "Extrusion18" cut sketch "Sketch15" against normal blind 127
properties part number "Button_slot"
